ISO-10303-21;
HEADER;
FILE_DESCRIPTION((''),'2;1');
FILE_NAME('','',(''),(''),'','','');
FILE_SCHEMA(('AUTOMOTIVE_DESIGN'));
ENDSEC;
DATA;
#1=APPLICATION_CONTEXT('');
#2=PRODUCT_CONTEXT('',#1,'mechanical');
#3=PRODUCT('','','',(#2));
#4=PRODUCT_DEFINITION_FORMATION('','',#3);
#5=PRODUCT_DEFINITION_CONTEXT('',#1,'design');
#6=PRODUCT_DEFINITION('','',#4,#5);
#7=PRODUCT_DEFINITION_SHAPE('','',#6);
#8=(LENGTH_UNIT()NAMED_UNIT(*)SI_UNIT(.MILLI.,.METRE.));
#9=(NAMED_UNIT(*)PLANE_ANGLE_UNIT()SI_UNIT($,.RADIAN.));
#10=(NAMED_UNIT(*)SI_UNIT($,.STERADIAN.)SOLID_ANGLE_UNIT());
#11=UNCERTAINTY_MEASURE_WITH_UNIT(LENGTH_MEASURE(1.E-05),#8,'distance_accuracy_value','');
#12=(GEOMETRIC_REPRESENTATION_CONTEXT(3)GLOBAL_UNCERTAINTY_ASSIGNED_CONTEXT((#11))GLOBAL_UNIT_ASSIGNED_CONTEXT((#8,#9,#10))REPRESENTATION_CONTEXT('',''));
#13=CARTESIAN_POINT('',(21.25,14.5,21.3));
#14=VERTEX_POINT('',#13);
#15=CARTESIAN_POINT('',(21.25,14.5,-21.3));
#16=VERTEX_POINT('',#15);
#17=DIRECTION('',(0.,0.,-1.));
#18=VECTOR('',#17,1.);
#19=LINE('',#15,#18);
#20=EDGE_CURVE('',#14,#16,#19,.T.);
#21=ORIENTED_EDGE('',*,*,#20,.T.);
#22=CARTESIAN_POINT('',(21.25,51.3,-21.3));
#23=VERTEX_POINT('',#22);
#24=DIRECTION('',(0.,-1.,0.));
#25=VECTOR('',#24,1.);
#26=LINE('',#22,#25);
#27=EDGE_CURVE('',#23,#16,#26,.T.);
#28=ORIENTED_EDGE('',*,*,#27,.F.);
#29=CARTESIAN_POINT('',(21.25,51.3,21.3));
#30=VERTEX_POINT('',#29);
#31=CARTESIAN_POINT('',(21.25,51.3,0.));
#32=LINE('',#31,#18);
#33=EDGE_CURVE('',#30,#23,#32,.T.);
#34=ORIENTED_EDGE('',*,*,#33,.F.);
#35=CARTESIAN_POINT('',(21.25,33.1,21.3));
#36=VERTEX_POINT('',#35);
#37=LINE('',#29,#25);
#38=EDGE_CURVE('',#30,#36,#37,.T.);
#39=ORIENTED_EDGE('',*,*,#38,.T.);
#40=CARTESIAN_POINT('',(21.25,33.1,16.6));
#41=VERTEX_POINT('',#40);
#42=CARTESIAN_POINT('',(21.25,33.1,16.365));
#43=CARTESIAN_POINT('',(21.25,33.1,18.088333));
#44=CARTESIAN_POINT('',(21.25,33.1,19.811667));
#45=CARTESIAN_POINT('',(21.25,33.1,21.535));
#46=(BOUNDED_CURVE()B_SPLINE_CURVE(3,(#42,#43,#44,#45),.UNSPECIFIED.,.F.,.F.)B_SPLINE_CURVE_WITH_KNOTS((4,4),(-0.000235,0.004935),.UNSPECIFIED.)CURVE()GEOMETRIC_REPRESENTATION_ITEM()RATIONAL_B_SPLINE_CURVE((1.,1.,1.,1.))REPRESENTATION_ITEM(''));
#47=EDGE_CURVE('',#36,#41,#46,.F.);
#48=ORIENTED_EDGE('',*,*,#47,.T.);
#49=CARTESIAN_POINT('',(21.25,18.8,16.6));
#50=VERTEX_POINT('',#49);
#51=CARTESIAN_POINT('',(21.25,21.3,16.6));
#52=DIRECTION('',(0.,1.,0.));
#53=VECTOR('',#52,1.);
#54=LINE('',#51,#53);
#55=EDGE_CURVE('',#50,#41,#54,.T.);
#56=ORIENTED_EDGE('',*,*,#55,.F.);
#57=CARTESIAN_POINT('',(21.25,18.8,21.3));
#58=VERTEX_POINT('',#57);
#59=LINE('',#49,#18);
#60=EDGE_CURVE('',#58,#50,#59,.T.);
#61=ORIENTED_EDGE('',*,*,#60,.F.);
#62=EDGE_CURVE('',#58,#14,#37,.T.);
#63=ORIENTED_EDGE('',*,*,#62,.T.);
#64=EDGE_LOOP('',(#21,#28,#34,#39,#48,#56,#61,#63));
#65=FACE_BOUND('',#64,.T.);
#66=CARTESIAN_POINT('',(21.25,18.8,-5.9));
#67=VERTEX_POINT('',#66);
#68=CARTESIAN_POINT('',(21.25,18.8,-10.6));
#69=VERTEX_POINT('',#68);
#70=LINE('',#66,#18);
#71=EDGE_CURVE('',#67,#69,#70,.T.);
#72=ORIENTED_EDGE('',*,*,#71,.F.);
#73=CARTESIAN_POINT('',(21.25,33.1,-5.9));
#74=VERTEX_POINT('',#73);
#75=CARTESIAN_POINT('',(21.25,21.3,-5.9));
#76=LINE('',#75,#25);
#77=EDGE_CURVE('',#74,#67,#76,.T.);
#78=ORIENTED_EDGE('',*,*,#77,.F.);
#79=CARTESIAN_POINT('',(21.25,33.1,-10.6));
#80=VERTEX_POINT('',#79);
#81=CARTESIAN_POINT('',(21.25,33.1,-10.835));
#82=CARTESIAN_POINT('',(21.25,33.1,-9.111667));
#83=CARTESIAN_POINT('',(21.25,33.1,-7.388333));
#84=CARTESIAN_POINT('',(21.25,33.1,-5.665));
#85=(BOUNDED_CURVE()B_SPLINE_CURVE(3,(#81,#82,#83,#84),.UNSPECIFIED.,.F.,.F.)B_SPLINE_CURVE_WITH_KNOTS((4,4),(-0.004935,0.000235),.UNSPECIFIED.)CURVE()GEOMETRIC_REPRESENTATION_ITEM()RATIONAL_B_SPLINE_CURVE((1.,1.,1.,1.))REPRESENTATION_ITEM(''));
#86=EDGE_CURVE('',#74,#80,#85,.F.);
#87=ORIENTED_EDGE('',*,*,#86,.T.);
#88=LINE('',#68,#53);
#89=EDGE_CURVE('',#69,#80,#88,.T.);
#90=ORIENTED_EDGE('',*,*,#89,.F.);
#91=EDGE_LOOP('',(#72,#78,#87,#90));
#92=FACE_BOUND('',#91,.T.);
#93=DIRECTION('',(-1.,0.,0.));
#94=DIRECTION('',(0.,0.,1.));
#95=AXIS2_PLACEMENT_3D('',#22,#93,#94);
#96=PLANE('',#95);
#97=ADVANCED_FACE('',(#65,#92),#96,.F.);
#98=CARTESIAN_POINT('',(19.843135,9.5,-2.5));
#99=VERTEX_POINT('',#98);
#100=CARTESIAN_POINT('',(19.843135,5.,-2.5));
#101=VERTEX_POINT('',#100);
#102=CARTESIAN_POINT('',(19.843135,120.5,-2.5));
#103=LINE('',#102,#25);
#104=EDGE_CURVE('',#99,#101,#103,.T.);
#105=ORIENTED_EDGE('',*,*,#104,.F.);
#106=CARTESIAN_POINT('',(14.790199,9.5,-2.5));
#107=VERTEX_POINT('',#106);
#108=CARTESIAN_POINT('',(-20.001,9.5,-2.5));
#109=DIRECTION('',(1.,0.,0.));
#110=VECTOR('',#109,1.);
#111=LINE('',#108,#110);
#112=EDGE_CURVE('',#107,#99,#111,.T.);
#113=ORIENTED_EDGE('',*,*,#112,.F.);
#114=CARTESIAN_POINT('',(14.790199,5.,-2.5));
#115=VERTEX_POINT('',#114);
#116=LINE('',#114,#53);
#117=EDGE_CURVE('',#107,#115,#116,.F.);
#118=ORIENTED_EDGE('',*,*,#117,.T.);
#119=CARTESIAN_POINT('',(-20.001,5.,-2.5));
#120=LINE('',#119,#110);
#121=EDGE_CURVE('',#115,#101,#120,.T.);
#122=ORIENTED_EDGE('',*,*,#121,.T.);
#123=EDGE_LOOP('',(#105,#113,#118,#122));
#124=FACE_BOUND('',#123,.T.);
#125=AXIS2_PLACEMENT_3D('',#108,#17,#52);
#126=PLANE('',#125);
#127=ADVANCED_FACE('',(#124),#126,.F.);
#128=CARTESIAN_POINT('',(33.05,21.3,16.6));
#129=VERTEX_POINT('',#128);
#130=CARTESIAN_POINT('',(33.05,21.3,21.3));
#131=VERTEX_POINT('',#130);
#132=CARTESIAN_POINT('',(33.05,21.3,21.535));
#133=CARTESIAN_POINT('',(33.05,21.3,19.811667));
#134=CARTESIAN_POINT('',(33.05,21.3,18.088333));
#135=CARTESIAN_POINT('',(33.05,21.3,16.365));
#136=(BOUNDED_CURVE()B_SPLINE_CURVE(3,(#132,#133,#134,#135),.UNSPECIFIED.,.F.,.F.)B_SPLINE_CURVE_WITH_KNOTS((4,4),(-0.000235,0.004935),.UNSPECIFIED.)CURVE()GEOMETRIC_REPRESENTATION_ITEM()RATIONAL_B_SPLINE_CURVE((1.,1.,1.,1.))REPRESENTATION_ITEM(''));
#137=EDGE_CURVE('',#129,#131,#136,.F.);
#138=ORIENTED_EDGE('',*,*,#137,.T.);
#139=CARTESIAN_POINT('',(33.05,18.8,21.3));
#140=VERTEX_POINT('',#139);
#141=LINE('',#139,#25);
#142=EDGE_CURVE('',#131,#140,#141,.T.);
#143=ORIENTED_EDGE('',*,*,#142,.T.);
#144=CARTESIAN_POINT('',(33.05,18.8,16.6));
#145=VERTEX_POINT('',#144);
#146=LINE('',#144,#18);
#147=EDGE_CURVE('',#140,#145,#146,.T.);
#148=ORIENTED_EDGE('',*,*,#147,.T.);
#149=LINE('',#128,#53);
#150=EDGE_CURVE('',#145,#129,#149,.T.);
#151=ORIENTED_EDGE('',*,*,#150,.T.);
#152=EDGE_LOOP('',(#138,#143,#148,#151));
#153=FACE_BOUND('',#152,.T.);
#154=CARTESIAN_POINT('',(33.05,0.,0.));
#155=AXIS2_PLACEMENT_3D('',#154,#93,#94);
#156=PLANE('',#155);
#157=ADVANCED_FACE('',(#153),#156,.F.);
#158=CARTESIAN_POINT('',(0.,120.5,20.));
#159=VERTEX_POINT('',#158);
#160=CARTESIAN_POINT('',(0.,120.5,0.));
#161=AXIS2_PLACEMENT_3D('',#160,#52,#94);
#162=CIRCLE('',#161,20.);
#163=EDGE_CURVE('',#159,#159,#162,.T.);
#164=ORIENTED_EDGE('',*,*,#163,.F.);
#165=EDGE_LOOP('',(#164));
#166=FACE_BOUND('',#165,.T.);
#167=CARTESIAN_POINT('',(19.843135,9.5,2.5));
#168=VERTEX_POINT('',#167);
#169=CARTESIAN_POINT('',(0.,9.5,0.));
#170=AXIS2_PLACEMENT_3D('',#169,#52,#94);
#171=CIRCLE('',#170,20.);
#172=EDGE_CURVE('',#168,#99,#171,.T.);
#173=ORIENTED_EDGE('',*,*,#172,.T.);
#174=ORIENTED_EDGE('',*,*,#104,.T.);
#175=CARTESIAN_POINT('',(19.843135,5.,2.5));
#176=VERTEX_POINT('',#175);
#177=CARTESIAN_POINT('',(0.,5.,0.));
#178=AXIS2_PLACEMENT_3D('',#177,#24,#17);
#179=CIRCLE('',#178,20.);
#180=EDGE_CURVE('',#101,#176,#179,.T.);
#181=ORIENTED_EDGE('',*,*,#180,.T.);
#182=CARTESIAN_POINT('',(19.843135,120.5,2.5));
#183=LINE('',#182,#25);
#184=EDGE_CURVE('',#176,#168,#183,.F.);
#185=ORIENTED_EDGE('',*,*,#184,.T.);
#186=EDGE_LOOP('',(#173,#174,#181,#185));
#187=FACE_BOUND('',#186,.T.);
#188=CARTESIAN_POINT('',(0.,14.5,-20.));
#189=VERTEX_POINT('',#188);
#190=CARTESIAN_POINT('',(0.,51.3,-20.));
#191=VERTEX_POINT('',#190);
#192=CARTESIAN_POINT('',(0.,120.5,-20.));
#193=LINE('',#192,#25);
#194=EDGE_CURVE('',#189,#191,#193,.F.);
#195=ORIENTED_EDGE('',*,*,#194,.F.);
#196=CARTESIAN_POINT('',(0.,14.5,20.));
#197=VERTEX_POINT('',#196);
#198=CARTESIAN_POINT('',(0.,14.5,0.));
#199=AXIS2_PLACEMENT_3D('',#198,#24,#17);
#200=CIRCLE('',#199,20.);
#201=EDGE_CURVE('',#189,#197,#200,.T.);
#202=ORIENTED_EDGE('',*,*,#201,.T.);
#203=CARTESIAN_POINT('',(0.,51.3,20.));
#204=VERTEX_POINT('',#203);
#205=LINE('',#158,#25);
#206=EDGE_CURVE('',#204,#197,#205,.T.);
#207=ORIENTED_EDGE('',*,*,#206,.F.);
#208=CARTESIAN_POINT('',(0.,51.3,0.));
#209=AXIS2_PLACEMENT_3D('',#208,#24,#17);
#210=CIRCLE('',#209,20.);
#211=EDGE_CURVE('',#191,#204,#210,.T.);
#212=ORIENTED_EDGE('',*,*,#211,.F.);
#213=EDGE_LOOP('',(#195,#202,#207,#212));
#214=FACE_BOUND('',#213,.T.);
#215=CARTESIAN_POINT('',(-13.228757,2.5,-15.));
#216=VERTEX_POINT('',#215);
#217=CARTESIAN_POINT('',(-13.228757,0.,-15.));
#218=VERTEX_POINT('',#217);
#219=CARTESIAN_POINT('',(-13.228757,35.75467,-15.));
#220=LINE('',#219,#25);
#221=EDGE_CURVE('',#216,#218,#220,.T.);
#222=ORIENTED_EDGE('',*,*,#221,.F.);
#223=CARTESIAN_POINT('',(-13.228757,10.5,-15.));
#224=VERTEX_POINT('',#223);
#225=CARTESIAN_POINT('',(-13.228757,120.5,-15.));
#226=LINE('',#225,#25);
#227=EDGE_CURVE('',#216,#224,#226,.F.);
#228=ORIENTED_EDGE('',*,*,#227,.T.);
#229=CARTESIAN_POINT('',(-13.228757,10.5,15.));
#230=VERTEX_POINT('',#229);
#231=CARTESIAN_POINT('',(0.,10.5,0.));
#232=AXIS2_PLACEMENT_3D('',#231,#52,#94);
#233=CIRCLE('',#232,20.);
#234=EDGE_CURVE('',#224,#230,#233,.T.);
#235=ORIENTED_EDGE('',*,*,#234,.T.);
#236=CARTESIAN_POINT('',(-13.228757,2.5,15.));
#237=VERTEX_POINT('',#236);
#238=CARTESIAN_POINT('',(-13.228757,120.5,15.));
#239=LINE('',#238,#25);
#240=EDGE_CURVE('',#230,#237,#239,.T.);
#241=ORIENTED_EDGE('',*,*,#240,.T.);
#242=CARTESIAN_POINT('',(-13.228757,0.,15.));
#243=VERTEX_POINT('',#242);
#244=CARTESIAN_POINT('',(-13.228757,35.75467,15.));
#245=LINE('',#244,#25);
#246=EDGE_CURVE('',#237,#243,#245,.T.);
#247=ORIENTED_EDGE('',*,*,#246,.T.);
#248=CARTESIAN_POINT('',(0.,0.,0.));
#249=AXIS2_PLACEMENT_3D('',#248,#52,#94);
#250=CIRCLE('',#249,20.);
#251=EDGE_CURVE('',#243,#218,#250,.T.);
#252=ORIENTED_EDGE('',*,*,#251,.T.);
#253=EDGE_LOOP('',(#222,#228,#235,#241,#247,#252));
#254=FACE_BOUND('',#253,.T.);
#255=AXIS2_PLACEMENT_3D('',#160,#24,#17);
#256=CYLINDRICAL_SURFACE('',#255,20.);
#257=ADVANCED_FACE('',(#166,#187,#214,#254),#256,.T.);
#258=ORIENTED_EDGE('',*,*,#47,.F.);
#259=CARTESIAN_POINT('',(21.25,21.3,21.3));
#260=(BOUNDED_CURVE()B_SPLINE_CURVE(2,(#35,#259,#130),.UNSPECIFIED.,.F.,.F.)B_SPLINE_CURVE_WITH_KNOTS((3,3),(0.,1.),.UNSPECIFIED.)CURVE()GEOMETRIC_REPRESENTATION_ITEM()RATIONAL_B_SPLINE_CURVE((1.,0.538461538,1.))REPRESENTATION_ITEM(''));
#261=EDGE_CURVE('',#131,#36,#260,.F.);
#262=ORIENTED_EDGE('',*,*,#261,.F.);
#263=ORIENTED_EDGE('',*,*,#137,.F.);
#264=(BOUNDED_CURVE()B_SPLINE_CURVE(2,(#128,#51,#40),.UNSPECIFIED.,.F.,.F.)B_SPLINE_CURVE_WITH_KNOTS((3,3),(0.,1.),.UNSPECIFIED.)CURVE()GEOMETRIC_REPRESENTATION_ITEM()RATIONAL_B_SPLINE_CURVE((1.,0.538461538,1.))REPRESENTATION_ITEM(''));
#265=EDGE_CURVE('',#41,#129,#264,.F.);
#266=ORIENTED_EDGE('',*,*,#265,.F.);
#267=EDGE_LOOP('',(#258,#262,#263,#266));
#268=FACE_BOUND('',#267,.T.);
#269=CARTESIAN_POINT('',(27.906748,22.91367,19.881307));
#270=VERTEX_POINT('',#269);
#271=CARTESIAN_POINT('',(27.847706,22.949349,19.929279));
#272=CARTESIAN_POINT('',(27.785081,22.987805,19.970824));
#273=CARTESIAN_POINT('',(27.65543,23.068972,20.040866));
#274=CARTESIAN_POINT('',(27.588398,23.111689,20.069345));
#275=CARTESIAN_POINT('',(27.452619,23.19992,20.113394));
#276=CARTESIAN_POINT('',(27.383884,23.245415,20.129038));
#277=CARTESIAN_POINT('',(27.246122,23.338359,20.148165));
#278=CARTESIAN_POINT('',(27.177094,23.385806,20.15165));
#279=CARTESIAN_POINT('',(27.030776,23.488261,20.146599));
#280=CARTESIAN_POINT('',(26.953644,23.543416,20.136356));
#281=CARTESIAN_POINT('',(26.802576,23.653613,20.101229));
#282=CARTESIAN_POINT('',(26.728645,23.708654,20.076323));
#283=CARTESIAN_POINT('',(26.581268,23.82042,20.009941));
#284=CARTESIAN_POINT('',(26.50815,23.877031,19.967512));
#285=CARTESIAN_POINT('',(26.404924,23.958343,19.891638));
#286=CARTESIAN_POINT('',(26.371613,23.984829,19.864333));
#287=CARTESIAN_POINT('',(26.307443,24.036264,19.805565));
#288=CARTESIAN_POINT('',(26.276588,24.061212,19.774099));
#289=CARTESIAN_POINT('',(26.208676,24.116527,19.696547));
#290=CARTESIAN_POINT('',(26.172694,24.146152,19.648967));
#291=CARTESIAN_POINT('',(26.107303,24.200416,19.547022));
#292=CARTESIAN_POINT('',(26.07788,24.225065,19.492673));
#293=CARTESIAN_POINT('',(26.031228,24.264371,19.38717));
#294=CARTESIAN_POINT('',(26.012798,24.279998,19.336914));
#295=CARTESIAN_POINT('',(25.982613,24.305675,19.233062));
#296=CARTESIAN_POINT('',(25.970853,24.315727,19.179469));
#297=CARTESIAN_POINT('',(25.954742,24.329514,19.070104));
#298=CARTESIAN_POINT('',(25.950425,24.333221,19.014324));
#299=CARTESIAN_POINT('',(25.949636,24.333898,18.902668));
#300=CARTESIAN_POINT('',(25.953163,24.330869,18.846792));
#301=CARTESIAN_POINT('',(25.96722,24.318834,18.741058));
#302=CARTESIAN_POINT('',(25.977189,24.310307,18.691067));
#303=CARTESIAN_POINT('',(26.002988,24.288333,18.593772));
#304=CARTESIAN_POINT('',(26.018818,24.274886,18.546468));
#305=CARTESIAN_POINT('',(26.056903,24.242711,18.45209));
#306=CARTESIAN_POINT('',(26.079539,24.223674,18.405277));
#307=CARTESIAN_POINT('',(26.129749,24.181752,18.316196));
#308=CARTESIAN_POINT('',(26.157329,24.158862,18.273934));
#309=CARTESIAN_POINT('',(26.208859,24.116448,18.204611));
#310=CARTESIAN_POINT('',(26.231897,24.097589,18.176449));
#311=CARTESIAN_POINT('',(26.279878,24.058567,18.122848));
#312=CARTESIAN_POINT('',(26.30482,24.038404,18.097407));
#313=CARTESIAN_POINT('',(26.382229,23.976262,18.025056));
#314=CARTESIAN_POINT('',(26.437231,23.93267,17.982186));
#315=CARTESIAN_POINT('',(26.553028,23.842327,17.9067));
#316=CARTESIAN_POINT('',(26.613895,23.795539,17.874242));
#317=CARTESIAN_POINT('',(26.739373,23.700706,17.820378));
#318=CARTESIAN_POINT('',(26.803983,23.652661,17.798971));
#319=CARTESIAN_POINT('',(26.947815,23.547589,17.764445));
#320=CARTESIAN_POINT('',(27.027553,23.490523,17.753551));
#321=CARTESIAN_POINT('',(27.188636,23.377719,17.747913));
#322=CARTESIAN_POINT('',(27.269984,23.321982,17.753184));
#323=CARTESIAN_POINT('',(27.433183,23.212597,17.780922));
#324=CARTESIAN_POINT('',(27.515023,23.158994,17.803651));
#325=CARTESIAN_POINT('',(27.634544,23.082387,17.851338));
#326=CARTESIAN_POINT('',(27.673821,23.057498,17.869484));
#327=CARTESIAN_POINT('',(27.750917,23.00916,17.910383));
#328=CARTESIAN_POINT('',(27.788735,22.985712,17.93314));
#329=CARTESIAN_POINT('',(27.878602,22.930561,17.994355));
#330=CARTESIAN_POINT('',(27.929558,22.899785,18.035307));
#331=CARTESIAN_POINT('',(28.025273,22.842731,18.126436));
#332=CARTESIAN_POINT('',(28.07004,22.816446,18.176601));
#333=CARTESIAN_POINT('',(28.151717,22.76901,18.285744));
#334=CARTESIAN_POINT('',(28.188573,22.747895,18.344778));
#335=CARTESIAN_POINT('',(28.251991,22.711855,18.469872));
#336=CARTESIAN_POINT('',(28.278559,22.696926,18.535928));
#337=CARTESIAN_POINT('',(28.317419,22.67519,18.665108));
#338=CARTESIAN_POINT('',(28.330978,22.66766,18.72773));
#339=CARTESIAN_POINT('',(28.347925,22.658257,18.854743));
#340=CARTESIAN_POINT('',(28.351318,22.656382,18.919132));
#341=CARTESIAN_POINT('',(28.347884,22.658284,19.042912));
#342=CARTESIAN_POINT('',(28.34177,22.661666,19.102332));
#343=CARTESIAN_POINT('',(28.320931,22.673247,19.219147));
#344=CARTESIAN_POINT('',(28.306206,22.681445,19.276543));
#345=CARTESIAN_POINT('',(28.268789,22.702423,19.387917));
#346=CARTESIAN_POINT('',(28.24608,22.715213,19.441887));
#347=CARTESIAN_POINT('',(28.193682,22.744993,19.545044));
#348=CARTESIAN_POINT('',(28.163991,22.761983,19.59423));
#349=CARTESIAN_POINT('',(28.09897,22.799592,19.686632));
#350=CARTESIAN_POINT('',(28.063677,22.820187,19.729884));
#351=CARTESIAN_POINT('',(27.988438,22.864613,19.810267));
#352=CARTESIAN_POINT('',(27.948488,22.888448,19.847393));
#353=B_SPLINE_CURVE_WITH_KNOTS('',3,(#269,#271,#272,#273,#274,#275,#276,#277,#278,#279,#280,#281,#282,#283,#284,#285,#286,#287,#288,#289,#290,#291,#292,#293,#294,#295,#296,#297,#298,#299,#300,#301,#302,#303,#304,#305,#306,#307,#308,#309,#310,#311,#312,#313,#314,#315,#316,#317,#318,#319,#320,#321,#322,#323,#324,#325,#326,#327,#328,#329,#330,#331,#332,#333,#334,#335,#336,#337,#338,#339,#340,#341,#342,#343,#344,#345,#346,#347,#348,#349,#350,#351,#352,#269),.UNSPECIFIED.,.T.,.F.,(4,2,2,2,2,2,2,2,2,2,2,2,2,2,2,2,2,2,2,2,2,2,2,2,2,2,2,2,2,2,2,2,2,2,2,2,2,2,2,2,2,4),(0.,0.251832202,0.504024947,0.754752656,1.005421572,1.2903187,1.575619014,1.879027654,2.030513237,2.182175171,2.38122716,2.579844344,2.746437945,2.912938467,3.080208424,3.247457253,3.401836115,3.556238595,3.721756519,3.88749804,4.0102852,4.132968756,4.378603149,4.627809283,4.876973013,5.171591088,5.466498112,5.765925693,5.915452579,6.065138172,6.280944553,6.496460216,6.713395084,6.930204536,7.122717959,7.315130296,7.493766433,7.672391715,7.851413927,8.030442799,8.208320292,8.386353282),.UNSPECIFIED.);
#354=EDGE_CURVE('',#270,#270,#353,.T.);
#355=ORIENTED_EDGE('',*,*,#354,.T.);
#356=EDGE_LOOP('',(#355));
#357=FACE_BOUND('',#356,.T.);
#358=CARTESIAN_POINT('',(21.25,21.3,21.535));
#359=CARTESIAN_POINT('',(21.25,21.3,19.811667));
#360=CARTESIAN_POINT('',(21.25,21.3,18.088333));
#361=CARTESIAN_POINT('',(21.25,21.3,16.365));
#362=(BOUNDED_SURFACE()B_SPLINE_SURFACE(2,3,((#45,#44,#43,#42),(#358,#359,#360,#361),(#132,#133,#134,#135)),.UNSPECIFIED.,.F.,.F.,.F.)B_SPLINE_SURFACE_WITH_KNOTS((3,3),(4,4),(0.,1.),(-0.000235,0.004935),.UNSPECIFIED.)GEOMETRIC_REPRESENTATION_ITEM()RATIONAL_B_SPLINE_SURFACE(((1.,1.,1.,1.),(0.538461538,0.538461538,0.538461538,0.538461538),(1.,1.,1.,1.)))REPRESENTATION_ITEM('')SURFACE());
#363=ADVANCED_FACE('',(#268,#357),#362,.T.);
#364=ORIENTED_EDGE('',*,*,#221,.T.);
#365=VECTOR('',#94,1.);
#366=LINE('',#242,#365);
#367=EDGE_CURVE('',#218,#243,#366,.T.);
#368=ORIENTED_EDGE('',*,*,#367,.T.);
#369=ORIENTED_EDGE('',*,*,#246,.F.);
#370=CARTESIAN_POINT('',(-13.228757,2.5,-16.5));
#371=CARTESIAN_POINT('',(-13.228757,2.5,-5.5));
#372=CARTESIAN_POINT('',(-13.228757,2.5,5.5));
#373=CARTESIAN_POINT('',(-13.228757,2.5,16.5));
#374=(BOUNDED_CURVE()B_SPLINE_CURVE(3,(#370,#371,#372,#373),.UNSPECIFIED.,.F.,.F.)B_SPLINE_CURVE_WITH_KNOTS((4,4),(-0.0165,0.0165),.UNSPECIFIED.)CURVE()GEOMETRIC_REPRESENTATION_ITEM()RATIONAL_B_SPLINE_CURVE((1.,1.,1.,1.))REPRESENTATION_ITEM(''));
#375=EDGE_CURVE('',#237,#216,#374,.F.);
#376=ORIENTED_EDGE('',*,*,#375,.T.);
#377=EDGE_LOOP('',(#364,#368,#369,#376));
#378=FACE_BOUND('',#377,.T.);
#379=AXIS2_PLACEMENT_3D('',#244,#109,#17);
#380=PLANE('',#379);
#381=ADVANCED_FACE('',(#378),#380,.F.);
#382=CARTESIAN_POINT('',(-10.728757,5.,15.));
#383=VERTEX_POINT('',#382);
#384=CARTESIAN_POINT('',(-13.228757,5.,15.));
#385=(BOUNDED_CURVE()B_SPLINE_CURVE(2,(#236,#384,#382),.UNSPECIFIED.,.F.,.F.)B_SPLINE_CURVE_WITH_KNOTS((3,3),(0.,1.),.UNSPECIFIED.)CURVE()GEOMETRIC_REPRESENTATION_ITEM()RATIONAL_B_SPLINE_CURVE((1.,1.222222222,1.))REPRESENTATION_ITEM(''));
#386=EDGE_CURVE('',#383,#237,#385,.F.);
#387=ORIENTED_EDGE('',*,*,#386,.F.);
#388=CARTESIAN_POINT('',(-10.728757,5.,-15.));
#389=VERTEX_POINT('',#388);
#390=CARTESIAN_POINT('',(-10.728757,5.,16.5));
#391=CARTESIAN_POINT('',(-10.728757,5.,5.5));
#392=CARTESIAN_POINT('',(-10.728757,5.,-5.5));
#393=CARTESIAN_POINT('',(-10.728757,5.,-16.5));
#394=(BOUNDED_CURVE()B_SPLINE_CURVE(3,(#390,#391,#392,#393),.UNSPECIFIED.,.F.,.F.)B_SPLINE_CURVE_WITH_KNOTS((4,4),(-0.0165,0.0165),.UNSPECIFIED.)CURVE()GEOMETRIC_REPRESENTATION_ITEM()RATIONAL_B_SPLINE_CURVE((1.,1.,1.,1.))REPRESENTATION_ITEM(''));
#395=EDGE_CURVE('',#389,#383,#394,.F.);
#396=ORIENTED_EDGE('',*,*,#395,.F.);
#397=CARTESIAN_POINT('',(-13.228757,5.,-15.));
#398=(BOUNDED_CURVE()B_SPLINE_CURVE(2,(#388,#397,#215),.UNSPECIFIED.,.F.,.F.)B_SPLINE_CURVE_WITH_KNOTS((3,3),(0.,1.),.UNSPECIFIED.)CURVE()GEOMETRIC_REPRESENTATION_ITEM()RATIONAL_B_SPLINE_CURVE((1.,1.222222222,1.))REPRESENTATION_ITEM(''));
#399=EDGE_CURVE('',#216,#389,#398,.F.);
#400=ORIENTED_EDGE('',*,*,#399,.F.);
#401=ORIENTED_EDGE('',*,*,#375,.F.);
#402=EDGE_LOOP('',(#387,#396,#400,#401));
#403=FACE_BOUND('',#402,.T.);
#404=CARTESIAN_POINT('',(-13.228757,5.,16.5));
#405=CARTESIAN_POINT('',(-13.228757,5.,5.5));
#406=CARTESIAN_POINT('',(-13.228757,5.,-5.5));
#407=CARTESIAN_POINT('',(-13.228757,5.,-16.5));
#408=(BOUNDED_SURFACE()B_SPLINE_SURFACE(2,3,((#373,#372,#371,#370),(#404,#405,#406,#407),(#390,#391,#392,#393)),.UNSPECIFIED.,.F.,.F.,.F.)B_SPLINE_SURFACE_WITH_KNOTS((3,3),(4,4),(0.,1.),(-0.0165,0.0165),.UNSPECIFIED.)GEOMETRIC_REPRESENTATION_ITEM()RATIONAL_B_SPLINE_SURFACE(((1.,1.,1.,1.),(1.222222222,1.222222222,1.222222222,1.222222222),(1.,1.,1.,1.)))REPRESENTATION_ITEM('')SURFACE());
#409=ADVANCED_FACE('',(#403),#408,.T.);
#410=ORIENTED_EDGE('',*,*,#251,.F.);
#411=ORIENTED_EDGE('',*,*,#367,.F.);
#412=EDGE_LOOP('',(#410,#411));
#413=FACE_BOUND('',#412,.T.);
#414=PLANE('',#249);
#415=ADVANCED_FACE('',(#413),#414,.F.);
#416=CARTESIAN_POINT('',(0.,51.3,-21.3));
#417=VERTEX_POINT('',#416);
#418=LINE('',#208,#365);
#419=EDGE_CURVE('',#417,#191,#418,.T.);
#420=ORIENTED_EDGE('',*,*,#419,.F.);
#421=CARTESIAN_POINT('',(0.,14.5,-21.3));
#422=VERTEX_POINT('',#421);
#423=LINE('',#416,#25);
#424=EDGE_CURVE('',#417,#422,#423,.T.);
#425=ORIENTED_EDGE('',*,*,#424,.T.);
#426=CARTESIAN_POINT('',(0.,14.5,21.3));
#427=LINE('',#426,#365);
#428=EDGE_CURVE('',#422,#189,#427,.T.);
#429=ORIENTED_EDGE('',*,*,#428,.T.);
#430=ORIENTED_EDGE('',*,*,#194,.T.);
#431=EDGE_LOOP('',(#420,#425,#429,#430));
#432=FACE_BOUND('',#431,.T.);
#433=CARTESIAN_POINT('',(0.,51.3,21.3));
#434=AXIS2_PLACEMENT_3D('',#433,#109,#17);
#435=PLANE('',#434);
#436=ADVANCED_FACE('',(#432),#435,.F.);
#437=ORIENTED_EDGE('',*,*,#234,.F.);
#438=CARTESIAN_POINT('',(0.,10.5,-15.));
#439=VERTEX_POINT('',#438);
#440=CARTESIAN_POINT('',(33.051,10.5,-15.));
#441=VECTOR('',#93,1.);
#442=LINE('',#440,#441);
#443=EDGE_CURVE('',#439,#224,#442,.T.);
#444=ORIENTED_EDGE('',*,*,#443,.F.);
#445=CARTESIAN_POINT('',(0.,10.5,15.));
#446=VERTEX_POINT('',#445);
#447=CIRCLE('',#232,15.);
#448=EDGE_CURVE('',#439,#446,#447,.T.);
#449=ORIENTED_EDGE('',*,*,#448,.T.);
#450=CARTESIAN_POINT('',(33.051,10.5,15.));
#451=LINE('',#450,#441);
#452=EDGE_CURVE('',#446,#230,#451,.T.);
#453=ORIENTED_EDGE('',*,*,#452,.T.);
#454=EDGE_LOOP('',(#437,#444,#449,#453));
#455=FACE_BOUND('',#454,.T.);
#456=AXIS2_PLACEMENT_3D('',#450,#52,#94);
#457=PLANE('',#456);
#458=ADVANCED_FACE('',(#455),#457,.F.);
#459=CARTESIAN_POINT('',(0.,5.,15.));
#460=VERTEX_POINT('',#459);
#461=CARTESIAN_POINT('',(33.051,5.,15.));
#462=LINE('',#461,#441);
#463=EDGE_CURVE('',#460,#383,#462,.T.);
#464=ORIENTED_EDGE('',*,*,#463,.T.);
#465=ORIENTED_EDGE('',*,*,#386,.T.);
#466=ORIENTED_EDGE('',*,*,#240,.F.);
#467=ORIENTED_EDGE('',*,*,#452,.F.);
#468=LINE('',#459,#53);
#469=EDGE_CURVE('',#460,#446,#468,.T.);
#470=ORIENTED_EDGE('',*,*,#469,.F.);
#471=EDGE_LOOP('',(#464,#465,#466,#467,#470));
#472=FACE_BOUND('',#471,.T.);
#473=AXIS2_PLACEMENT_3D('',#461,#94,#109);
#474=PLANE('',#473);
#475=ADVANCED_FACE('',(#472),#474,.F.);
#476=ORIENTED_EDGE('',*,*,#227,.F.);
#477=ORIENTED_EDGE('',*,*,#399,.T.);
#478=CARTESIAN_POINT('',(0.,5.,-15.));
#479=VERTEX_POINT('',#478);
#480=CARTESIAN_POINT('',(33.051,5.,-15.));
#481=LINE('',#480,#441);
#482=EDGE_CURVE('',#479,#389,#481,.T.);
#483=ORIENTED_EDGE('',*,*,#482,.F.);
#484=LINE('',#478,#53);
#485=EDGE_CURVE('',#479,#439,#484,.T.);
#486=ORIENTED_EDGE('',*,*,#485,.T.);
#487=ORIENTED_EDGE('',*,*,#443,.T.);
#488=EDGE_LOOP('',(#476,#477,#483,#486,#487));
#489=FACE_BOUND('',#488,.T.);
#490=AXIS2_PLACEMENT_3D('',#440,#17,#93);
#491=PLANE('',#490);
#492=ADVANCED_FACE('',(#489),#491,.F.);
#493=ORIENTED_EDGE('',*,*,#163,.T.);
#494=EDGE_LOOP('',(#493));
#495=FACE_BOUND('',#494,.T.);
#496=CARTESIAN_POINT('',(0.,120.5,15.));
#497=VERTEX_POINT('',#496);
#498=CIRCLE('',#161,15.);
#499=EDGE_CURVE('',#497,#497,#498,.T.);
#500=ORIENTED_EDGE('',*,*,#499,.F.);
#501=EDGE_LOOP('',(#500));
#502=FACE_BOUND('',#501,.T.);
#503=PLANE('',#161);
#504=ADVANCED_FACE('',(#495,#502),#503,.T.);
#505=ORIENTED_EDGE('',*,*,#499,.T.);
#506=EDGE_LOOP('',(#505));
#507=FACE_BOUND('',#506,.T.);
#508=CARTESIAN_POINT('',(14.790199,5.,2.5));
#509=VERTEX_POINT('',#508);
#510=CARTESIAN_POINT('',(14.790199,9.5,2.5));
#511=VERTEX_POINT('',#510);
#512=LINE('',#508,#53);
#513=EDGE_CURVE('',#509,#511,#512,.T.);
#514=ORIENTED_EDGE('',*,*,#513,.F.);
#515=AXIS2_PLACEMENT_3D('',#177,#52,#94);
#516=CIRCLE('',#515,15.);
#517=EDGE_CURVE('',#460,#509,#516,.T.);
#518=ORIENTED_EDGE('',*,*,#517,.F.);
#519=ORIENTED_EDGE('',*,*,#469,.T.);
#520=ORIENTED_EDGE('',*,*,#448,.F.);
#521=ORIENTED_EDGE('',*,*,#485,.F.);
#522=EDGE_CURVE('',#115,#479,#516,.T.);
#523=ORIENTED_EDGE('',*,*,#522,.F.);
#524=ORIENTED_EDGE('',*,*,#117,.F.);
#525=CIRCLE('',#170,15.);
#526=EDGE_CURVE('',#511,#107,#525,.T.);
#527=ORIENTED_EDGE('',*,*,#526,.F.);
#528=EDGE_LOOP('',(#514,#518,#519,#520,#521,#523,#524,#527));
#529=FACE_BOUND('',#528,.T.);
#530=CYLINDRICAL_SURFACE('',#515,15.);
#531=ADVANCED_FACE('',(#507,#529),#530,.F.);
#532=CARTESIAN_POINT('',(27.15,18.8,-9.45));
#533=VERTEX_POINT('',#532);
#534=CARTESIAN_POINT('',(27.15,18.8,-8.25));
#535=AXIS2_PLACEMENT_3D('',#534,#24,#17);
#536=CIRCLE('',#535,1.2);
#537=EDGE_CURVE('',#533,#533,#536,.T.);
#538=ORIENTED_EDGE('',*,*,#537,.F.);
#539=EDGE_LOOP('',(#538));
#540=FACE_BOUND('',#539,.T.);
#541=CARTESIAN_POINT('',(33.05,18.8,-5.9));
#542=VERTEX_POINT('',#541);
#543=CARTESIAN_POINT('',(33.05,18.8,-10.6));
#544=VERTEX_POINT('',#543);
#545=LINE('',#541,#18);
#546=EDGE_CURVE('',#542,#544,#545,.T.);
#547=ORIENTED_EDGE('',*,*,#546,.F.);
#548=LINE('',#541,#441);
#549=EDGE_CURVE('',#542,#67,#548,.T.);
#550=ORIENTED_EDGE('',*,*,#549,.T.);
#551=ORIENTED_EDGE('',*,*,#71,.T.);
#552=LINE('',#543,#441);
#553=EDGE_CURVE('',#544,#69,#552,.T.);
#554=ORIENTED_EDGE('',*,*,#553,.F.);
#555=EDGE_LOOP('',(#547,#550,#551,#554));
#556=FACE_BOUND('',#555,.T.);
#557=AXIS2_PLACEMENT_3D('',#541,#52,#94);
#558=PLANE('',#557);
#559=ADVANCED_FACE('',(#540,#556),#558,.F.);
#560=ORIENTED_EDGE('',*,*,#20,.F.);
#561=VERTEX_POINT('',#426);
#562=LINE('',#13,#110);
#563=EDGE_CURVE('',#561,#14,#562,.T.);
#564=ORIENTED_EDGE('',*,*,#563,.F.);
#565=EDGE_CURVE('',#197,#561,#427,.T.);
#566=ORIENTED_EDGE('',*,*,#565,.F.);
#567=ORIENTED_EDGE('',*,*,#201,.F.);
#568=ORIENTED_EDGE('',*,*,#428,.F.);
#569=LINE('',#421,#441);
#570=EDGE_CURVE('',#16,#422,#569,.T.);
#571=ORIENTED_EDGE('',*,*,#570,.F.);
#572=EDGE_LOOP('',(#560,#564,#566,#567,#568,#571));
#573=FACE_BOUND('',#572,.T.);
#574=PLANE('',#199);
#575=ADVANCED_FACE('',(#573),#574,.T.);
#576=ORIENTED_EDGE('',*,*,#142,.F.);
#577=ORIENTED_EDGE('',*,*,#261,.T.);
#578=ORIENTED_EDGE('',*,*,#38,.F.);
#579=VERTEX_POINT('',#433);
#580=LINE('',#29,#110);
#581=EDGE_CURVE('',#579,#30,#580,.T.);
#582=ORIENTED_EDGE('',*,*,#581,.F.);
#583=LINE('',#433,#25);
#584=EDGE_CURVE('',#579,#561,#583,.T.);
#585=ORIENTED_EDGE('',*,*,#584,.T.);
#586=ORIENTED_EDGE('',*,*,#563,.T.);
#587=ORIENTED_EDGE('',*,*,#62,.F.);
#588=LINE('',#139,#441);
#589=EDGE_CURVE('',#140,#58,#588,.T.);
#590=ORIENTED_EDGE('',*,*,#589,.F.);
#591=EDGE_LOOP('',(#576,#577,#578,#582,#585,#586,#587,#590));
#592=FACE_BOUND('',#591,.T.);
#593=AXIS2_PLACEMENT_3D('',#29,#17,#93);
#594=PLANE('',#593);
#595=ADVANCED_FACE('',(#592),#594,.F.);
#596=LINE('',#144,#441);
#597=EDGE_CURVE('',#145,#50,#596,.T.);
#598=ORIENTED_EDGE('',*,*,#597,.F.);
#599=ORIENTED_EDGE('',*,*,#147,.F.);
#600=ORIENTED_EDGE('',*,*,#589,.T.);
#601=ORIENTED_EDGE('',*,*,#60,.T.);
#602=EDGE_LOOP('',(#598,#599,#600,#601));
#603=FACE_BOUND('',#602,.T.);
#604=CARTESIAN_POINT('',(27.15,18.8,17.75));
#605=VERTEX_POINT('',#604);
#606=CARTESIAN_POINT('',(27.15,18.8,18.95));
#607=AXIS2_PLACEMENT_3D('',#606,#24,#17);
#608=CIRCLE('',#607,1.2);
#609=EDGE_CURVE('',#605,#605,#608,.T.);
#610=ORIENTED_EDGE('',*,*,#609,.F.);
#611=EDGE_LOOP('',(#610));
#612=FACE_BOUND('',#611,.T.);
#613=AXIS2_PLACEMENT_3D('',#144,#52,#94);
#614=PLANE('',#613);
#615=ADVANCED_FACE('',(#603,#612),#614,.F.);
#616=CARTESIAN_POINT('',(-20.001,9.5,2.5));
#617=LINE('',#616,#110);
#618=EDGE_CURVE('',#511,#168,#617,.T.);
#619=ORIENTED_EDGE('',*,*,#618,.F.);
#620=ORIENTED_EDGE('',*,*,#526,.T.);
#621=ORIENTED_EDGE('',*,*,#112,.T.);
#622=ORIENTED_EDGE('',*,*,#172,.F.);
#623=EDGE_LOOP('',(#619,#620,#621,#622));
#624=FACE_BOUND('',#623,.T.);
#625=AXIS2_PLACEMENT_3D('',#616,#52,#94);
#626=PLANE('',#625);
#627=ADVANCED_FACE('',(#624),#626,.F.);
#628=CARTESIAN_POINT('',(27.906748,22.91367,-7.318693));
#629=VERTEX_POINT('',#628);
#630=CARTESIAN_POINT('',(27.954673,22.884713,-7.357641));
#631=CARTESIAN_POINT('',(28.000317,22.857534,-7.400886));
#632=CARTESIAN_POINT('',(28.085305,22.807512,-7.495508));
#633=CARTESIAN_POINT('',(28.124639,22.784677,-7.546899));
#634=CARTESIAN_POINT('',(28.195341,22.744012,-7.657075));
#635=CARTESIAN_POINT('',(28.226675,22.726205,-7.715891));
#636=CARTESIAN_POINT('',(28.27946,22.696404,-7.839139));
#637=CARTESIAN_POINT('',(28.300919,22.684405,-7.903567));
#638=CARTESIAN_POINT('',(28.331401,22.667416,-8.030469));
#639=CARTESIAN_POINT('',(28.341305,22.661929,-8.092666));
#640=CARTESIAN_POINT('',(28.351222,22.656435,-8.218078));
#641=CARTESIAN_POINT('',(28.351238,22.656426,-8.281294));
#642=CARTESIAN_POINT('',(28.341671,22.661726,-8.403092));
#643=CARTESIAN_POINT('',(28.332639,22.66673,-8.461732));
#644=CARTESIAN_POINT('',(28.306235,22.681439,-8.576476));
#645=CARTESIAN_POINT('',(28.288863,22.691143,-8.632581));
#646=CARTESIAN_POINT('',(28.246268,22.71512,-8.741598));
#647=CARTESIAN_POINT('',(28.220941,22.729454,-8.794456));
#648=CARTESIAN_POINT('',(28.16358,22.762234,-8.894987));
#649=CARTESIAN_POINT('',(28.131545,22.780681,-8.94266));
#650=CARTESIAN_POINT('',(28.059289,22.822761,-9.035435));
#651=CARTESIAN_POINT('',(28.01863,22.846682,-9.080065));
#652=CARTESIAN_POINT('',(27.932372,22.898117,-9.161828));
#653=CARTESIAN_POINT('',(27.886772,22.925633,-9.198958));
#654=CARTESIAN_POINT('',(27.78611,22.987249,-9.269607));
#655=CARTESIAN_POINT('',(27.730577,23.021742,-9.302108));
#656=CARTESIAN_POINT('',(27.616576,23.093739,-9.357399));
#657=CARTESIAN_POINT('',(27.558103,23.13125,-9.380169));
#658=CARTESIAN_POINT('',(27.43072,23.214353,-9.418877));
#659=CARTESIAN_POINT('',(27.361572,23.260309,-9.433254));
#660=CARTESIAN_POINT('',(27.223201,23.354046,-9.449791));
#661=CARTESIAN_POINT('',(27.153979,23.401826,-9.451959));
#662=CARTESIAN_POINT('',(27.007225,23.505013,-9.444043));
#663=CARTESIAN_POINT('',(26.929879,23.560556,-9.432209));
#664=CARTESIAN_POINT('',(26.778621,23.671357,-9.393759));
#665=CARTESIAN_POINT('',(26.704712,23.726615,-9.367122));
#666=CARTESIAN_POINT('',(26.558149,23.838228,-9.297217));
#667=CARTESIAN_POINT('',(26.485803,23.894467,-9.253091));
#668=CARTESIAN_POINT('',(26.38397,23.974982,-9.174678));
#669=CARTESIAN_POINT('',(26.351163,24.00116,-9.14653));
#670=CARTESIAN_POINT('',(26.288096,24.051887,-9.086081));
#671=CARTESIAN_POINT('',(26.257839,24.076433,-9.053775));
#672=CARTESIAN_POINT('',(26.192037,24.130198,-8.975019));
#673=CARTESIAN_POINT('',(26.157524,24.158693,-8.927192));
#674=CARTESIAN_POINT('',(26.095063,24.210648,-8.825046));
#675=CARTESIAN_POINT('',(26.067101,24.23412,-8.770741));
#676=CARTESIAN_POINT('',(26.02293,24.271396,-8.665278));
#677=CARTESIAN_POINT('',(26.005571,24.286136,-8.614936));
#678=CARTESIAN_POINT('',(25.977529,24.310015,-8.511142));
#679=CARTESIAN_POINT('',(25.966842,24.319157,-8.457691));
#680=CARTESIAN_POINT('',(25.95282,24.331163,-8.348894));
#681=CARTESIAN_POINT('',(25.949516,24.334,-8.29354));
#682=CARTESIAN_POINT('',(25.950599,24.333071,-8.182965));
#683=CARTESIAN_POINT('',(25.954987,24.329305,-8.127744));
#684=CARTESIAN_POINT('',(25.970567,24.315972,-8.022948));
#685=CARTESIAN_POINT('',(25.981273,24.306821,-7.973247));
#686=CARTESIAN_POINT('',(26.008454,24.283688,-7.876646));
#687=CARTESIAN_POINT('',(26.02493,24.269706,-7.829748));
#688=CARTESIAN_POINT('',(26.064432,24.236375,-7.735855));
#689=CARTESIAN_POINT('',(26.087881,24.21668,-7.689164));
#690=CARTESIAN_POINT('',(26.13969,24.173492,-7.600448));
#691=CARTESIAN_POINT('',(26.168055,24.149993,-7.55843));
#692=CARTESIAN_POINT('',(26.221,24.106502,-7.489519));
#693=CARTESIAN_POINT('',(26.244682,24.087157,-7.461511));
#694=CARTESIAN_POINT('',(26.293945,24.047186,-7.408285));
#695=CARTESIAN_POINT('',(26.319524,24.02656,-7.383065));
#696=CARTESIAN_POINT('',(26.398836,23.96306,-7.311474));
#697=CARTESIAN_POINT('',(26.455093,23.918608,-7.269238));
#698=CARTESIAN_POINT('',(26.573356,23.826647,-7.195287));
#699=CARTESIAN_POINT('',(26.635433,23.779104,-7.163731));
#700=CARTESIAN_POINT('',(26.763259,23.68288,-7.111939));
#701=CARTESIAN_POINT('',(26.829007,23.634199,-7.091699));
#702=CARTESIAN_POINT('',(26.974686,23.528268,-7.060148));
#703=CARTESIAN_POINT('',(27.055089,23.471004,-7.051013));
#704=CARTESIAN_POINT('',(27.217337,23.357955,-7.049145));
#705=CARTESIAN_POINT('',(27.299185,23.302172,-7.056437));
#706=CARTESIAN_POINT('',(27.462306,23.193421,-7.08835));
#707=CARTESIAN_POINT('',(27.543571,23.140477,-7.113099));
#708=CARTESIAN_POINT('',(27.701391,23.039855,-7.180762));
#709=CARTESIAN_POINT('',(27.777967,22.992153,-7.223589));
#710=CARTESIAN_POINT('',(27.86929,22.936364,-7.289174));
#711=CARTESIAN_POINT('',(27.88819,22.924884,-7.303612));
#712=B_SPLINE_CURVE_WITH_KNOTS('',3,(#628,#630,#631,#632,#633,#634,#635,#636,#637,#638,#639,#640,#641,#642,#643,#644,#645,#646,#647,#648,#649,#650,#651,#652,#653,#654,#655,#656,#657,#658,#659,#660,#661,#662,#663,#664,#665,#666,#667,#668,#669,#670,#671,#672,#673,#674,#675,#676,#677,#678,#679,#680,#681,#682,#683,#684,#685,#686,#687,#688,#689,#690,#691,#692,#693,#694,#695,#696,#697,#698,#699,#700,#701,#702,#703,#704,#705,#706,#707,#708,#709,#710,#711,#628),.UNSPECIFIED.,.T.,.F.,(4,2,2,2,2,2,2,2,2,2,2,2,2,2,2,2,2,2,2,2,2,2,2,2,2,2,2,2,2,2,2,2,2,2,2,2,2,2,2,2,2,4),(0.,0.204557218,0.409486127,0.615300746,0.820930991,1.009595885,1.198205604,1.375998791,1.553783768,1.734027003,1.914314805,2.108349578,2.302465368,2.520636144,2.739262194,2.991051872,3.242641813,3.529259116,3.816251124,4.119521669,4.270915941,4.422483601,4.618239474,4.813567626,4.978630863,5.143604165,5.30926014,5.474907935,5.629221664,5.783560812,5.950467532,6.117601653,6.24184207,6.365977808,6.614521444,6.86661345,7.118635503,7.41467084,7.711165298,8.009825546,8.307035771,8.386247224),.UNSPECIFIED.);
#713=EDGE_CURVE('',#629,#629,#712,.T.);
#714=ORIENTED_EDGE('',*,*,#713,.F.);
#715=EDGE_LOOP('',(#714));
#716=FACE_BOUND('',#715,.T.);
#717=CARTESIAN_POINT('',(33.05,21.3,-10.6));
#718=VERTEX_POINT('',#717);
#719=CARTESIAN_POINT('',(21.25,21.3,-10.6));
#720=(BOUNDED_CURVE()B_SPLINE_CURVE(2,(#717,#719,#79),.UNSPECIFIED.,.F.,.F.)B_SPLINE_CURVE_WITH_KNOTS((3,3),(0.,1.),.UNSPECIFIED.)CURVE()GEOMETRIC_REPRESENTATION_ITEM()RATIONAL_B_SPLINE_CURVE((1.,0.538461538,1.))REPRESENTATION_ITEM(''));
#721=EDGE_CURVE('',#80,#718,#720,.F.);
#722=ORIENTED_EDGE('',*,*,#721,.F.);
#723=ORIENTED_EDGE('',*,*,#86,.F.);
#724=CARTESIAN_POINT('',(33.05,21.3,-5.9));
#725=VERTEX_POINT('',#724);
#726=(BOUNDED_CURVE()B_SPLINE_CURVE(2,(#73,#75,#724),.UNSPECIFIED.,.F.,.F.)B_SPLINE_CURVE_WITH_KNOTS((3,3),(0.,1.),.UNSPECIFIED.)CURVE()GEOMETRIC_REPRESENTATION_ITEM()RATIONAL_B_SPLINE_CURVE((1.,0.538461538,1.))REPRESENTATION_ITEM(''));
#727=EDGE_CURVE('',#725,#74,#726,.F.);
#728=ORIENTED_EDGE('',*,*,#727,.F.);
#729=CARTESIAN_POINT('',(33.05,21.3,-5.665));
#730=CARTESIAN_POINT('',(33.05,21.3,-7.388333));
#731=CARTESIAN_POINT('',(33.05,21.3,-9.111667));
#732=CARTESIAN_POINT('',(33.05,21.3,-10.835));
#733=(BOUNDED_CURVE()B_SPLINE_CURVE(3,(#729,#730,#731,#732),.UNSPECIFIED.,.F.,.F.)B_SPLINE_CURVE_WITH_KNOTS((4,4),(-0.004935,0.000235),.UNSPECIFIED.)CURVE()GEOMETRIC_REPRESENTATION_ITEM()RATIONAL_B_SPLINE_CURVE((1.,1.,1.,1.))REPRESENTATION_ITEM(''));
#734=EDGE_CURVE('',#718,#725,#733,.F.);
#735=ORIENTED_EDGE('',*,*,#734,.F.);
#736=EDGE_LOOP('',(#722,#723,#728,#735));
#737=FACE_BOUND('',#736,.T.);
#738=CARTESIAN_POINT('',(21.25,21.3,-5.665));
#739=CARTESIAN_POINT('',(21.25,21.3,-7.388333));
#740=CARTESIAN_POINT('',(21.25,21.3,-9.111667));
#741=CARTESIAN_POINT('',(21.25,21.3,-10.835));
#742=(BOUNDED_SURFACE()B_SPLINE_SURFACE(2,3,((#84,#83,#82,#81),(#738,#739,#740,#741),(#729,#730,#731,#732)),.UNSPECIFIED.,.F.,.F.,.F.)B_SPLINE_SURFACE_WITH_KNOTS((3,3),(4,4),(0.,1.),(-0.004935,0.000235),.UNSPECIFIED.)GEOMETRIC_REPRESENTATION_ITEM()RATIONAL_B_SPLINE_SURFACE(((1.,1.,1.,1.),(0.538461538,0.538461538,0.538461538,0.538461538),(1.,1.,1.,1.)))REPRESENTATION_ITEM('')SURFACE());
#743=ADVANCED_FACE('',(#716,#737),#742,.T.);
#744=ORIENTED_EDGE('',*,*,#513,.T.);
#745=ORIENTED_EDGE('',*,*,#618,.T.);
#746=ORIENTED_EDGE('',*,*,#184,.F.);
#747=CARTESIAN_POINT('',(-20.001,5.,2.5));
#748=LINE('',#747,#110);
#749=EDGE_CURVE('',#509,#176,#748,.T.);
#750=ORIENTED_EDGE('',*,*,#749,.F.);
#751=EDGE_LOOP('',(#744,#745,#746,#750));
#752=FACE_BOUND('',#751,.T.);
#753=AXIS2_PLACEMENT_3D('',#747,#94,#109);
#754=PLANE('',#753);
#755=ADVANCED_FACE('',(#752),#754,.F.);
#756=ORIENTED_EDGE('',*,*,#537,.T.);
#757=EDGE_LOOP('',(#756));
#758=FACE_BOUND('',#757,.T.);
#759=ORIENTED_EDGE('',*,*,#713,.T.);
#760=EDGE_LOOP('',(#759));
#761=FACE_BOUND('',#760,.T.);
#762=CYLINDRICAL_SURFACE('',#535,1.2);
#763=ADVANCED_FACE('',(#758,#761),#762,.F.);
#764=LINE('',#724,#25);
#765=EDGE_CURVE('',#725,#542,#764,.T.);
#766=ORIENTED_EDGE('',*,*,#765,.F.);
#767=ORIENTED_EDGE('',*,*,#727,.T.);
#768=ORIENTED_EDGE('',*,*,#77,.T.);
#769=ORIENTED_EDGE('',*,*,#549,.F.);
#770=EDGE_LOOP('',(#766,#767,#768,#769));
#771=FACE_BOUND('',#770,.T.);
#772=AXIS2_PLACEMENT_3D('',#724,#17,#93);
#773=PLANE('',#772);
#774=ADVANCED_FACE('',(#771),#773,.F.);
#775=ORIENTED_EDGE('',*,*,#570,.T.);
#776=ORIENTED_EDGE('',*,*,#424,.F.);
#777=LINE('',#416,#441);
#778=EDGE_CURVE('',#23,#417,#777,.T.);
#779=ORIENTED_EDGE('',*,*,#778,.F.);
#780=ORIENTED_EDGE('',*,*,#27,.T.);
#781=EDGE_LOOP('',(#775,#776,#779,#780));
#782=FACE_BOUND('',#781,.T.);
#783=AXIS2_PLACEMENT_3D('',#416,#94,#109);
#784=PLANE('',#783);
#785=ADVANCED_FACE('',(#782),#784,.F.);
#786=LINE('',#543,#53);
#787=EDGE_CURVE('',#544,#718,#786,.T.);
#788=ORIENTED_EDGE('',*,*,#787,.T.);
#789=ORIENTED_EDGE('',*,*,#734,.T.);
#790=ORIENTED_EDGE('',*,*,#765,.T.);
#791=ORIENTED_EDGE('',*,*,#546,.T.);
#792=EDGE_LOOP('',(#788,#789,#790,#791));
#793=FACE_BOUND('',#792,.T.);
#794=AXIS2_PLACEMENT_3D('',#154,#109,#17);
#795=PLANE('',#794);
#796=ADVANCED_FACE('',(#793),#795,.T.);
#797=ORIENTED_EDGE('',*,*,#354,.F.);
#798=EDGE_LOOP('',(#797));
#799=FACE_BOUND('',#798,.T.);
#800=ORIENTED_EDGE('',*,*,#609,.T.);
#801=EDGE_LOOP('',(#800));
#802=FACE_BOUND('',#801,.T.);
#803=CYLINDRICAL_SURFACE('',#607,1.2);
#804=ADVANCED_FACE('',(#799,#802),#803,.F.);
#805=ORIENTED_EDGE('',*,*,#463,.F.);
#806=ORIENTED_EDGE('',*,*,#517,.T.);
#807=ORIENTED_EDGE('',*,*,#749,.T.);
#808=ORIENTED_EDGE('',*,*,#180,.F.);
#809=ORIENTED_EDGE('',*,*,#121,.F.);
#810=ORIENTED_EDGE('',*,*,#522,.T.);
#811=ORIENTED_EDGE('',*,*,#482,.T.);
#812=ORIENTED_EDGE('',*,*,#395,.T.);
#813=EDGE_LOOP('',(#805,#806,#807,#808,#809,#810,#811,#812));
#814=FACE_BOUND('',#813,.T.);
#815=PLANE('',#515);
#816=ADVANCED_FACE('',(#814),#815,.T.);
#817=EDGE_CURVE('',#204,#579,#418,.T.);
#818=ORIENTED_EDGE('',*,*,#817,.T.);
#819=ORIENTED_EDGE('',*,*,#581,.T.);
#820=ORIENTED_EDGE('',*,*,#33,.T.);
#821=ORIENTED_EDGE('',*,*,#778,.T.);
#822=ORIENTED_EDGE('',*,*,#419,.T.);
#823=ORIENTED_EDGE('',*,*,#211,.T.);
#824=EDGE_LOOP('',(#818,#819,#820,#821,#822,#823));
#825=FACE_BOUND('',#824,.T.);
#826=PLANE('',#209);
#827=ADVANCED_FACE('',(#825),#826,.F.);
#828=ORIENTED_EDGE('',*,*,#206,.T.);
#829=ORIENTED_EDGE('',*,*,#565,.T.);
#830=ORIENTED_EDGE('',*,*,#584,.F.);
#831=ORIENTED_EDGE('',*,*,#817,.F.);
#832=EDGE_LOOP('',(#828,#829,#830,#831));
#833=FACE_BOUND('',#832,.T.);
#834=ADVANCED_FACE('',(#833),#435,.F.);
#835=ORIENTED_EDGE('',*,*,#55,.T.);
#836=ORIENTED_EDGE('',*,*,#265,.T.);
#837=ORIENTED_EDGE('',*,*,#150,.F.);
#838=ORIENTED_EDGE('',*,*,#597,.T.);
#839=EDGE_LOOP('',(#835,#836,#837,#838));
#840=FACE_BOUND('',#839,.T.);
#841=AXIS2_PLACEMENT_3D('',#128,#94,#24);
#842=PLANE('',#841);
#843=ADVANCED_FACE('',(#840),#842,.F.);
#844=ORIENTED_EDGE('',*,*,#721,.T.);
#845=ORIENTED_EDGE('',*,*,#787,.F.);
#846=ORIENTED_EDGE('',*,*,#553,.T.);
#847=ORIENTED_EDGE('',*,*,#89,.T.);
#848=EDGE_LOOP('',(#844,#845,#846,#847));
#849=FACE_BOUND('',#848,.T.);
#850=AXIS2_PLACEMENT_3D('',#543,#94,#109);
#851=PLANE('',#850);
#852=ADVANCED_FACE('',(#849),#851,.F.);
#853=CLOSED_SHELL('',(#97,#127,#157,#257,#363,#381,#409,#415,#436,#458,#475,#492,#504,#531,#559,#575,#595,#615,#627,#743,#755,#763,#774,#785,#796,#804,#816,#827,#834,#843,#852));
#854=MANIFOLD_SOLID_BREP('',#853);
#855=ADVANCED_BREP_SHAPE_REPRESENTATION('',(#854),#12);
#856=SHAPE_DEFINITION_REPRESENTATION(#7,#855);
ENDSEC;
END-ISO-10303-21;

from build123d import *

# Parameters (mm, degrees)
SKETCH1_R                = 20
BOSS_EXTRUDE1_DEPTH      = 120.5
BOSS_EXTRUDE2_START      = 14.5
BOSS_EXTRUDE2_DEPTH      = 36.8
SKETCH7_W                = 4.7
SKETCH7_H                = 2.5
BOSS_EXTRUDE3_DEPTH      = 11.8
SKETCH2_R                = 15
CUT_EXTRUDE2_DEPTH       = 115.5
CUT_EXTRUDE3_REACH       = 135.373
CUT_EXTRUDE3_END_RADIUS  = 15
SKETCH12_W               = 30
SKETCH12_H               = 5.5
CUT_EXTRUDE5_DEPTH       = 5
FILLET3_SIZE             = 2.5
M2_CLEARANCE_HOLE3_D     = 2.4
M2_CLEARANCE_HOLE3_DEPTH = 2.5
M2_CLEARANCE_HOLE3_TIP   = 0.721032743
FILLET4_SIZE             = 11.8
CUT_EXTRUDE6_REACH       = 130.74
CUT_EXTRUDE6_END_RADIUS  = 15


with BuildPart() as part:
    # Sketch1 → Boss-Extrude1 (new body)
    with BuildSketch(Plane(origin=(0, 0, 0), x_dir=(1, 0, 0), z_dir=(0, 1, 0))):
        with Locations(Location((0, 0, 0), (0, 0, 270))):
            Circle(SKETCH1_R)
    extrude(amount=BOSS_EXTRUDE1_DEPTH)

    # Sketch6 → Boss-Extrude2 (add)
    with BuildSketch(Plane(origin=(0, 0, 0), x_dir=(1, 0, 0), z_dir=(0, 1, 0)).offset(BOSS_EXTRUDE2_START)):
        Polygon((21.25, 21.3), (21.25, 0), (21.25, -21.3), (0, -21.3), (0, 0), (0, 21.3), align=None)
    extrude(amount=BOSS_EXTRUDE2_DEPTH)

    # Sketch7 → Boss-Extrude3 (add)
    with BuildSketch(Plane(origin=(21.25, 0, 0), x_dir=(0, 0, -1), z_dir=(1, 0, 0))):
        with Locations((8.25, 20.05)):
            Rectangle(SKETCH7_W, SKETCH7_H)
        with Locations((-18.95, 20.05)):
            Rectangle(SKETCH7_W, SKETCH7_H)
    extrude(amount=BOSS_EXTRUDE3_DEPTH)

    # Sketch2 → Cut-Extrude2 (cut)
    with BuildSketch(Plane(origin=(0, 120.5, 0), x_dir=(1, 0, 0), z_dir=(0, 1, 0))):
        with Locations(Location((0, 0, 0), (0, 0, 270))):
            Circle(SKETCH2_R)
    extrude(amount=-CUT_EXTRUDE2_DEPTH, mode=Mode.SUBTRACT)

    # Cut-Extrude3: up to this cylinder (the profile starts outside it)
    cut_extrude3_end = Plane(origin=(0, 7.75, 0), z_dir=(0, 1, 0)) * Cylinder(CUT_EXTRUDE3_END_RADIUS, 301.746, mode=Mode.PRIVATE)
    # Sketch12 → Cut-Extrude3 (cut, up to the surface)
    with BuildSketch(Plane.ZY.offset(20), mode=Mode.PRIVATE) as cut_extrude3_sk1:
        with Locations((0, 7.75)):
            Rectangle(SKETCH12_W, SKETCH12_H)
    cut_extrude3_tool1 = extrude(cut_extrude3_sk1.sketch, amount=-CUT_EXTRUDE3_REACH, mode=Mode.PRIVATE) - cut_extrude3_end
    add(cut_extrude3_tool1.solids().sort_by_distance((-20, 7.75, 0))[0], mode=Mode.SUBTRACT)

    # Sketch13 → Cut-Extrude5 (cut)
    with BuildSketch(Plane.XZ):
        with BuildLine():
            Line((-13.228756555, 15), (-13.228756555, -15))
            ThreePointArc((-13.228756555, -15), (-20, 0), (-13.228756555, 15))
        make_face()
    extrude(amount=-CUT_EXTRUDE5_DEPTH, mode=Mode.SUBTRACT)

    # Fillet3
    # a fillet whose section is not a circle: 2.5 mm, written as the material it takes off along each edge
    with BuildSketch(Plane(origin=(-13.228756555, 5, 15), x_dir=(0, -1, 0), z_dir=(0, 0, -1))) as fillet3_piece_1:
        with BuildLine():
            Bezier((FILLET3_SIZE, 0), (0, 0), (0, -FILLET3_SIZE), weights=[1, 1.222222222, 1])
            Line((0, -FILLET3_SIZE), (0, 0))
            Line((0, 0), (FILLET3_SIZE, 0))
        make_face()
    extrude(amount=30, mode=Mode.SUBTRACT)

    # M2 Clearance Hole3
    with Locations(Plane(origin=(0, 18.8, 0), x_dir=(-1, 0, 0), z_dir=(0, -1, 0))):
        with Locations((-27.15, 8.25), (-27.15, -18.95)):
            Hole(M2_CLEARANCE_HOLE3_D / 2, depth=M2_CLEARANCE_HOLE3_DEPTH)
            with Locations((0, 0, -(M2_CLEARANCE_HOLE3_DEPTH + M2_CLEARANCE_HOLE3_TIP / 2))):  # 118° drill point
                Cone(0, M2_CLEARANCE_HOLE3_D / 2, M2_CLEARANCE_HOLE3_TIP, mode=Mode.SUBTRACT)

    # Fillet4
    # a fillet whose section is not a circle: 11.8 mm, written as the material it adds along each edge
    with BuildSketch(Plane(origin=(21.25, 21.3, 21.3), x_dir=(1, 0, 0), z_dir=(0, 0, -1))) as fillet4_piece_1_section:
        with BuildLine():
            Bezier((FILLET4_SIZE, 0), (0, 0), (0, -FILLET4_SIZE), weights=[1, 0.538461538, 1])
            Line((0, -FILLET4_SIZE), (0, 0))
            Line((0, 0), (FILLET4_SIZE, 0))
        make_face()
    fillet4_piece_1 = extrude(amount=4.7, mode=Mode.PRIVATE)
    fillet4_piece_1 = fillet4_piece_1 - Plane(origin=(27.15, 21.3, 18.95), x_dir=(1, 0, 0), z_dir=(0, 1, 0)) * Cylinder(1.2, 57, mode=Mode.PRIVATE)
    add(fillet4_piece_1)
    with BuildSketch(Plane(origin=(21.25, 21.3, 21.3), x_dir=(1, 0, 0), z_dir=(0, 0, -1))) as fillet4_piece_2_section:
        with BuildLine():
            Bezier((FILLET4_SIZE, 0), (0, 0), (0, -FILLET4_SIZE), weights=[1, 0.538461538, 1])
            Line((0, -FILLET4_SIZE), (0, 0))
            Line((0, 0), (FILLET4_SIZE, 0))
        make_face()
    fillet4_piece_2 = extrude(amount=34.2, mode=Mode.PRIVATE)
    fillet4_piece_2 = split(fillet4_piece_2, bisect_by=Plane(origin=(21.25, 21.3, -5.9), z_dir=(0, 0, -1)), keep=Keep.TOP, mode=Mode.PRIVATE)
    fillet4_piece_2 = split(fillet4_piece_2, bisect_by=Plane(origin=(21.25, 21.3, -10.6), z_dir=(0, 0, 1)), keep=Keep.TOP, mode=Mode.PRIVATE)
    fillet4_piece_2 = fillet4_piece_2 - Plane(origin=(27.15, 21.3, -8.25), x_dir=(1, 0, 0), z_dir=(0, 1, 0)) * Cylinder(1.2, 116, mode=Mode.PRIVATE)
    add(fillet4_piece_2)
    with BuildSketch(Plane(origin=(21.25, 21.3, -10.6), x_dir=(0, 1, 0), z_dir=(0, 0, 1))) as fillet4_piece_3_section:
        with BuildLine():
            Bezier((FILLET4_SIZE, 0), (0, 0), (0, -FILLET4_SIZE), weights=[1, 0.538461538, 1])
            Line((0, -FILLET4_SIZE), (0, 0))
            Line((0, 0), (FILLET4_SIZE, 0))
        make_face()
    fillet4_piece_3 = extrude(amount=4.7, mode=Mode.PRIVATE)
    fillet4_piece_3 = fillet4_piece_3 - Plane(origin=(27.15, 21.3, -8.25), x_dir=(1, 0, 0), z_dir=(0, 1, 0)) * Cylinder(1.2, 57, mode=Mode.PRIVATE)
    add(fillet4_piece_3)
    with BuildSketch(Plane(origin=(21.25, 21.3, -10.6), x_dir=(0, 1, 0), z_dir=(0, 0, 1))) as fillet4_piece_4_section:
        with BuildLine():
            Bezier((FILLET4_SIZE, 0), (0, 0), (0, -FILLET4_SIZE), weights=[1, 0.538461538, 1])
            Line((0, -FILLET4_SIZE), (0, 0))
            Line((0, 0), (FILLET4_SIZE, 0))
        make_face()
    fillet4_piece_4 = extrude(amount=34.2, mode=Mode.PRIVATE)
    fillet4_piece_4 = split(fillet4_piece_4, bisect_by=Plane(origin=(21.25, 21.3, 21.3), z_dir=(0, 0, -1)), keep=Keep.TOP, mode=Mode.PRIVATE)
    fillet4_piece_4 = split(fillet4_piece_4, bisect_by=Plane(origin=(21.25, 21.3, 16.6), z_dir=(0, 0, 1)), keep=Keep.TOP, mode=Mode.PRIVATE)
    fillet4_piece_4 = fillet4_piece_4 - Plane(origin=(27.15, 21.3, 18.95), x_dir=(1, 0, 0), z_dir=(0, 1, 0)) * Cylinder(1.2, 116, mode=Mode.PRIVATE)
    add(fillet4_piece_4)

    # Cut-Extrude6: up to this cylinder (the profile starts outside it)
    cut_extrude6_end = Plane(origin=(0, 7.25, 0), z_dir=(0, 1, 0)) * Cylinder(CUT_EXTRUDE6_END_RADIUS, 292.48, mode=Mode.PRIVATE)
    # Sketch21 → Cut-Extrude6 (cut, up to the surface)
    with BuildSketch(Plane(origin=(20, 0, 0), x_dir=(0, 0, -1), z_dir=(1, 0, 0)), mode=Mode.PRIVATE) as cut_extrude6_sk1:
        Polygon((0, 5), (-2.5, 5), (-2.5, 9.5), (2.5, 9.5), (2.5, 5), align=None)
    cut_extrude6_tool1 = extrude(cut_extrude6_sk1.sketch, amount=-CUT_EXTRUDE6_REACH, mode=Mode.PRIVATE) - cut_extrude6_end
    add(cut_extrude6_tool1.solids().sort_by_distance((20, 7.25, 0))[0], mode=Mode.SUBTRACT)


solid = part.part
